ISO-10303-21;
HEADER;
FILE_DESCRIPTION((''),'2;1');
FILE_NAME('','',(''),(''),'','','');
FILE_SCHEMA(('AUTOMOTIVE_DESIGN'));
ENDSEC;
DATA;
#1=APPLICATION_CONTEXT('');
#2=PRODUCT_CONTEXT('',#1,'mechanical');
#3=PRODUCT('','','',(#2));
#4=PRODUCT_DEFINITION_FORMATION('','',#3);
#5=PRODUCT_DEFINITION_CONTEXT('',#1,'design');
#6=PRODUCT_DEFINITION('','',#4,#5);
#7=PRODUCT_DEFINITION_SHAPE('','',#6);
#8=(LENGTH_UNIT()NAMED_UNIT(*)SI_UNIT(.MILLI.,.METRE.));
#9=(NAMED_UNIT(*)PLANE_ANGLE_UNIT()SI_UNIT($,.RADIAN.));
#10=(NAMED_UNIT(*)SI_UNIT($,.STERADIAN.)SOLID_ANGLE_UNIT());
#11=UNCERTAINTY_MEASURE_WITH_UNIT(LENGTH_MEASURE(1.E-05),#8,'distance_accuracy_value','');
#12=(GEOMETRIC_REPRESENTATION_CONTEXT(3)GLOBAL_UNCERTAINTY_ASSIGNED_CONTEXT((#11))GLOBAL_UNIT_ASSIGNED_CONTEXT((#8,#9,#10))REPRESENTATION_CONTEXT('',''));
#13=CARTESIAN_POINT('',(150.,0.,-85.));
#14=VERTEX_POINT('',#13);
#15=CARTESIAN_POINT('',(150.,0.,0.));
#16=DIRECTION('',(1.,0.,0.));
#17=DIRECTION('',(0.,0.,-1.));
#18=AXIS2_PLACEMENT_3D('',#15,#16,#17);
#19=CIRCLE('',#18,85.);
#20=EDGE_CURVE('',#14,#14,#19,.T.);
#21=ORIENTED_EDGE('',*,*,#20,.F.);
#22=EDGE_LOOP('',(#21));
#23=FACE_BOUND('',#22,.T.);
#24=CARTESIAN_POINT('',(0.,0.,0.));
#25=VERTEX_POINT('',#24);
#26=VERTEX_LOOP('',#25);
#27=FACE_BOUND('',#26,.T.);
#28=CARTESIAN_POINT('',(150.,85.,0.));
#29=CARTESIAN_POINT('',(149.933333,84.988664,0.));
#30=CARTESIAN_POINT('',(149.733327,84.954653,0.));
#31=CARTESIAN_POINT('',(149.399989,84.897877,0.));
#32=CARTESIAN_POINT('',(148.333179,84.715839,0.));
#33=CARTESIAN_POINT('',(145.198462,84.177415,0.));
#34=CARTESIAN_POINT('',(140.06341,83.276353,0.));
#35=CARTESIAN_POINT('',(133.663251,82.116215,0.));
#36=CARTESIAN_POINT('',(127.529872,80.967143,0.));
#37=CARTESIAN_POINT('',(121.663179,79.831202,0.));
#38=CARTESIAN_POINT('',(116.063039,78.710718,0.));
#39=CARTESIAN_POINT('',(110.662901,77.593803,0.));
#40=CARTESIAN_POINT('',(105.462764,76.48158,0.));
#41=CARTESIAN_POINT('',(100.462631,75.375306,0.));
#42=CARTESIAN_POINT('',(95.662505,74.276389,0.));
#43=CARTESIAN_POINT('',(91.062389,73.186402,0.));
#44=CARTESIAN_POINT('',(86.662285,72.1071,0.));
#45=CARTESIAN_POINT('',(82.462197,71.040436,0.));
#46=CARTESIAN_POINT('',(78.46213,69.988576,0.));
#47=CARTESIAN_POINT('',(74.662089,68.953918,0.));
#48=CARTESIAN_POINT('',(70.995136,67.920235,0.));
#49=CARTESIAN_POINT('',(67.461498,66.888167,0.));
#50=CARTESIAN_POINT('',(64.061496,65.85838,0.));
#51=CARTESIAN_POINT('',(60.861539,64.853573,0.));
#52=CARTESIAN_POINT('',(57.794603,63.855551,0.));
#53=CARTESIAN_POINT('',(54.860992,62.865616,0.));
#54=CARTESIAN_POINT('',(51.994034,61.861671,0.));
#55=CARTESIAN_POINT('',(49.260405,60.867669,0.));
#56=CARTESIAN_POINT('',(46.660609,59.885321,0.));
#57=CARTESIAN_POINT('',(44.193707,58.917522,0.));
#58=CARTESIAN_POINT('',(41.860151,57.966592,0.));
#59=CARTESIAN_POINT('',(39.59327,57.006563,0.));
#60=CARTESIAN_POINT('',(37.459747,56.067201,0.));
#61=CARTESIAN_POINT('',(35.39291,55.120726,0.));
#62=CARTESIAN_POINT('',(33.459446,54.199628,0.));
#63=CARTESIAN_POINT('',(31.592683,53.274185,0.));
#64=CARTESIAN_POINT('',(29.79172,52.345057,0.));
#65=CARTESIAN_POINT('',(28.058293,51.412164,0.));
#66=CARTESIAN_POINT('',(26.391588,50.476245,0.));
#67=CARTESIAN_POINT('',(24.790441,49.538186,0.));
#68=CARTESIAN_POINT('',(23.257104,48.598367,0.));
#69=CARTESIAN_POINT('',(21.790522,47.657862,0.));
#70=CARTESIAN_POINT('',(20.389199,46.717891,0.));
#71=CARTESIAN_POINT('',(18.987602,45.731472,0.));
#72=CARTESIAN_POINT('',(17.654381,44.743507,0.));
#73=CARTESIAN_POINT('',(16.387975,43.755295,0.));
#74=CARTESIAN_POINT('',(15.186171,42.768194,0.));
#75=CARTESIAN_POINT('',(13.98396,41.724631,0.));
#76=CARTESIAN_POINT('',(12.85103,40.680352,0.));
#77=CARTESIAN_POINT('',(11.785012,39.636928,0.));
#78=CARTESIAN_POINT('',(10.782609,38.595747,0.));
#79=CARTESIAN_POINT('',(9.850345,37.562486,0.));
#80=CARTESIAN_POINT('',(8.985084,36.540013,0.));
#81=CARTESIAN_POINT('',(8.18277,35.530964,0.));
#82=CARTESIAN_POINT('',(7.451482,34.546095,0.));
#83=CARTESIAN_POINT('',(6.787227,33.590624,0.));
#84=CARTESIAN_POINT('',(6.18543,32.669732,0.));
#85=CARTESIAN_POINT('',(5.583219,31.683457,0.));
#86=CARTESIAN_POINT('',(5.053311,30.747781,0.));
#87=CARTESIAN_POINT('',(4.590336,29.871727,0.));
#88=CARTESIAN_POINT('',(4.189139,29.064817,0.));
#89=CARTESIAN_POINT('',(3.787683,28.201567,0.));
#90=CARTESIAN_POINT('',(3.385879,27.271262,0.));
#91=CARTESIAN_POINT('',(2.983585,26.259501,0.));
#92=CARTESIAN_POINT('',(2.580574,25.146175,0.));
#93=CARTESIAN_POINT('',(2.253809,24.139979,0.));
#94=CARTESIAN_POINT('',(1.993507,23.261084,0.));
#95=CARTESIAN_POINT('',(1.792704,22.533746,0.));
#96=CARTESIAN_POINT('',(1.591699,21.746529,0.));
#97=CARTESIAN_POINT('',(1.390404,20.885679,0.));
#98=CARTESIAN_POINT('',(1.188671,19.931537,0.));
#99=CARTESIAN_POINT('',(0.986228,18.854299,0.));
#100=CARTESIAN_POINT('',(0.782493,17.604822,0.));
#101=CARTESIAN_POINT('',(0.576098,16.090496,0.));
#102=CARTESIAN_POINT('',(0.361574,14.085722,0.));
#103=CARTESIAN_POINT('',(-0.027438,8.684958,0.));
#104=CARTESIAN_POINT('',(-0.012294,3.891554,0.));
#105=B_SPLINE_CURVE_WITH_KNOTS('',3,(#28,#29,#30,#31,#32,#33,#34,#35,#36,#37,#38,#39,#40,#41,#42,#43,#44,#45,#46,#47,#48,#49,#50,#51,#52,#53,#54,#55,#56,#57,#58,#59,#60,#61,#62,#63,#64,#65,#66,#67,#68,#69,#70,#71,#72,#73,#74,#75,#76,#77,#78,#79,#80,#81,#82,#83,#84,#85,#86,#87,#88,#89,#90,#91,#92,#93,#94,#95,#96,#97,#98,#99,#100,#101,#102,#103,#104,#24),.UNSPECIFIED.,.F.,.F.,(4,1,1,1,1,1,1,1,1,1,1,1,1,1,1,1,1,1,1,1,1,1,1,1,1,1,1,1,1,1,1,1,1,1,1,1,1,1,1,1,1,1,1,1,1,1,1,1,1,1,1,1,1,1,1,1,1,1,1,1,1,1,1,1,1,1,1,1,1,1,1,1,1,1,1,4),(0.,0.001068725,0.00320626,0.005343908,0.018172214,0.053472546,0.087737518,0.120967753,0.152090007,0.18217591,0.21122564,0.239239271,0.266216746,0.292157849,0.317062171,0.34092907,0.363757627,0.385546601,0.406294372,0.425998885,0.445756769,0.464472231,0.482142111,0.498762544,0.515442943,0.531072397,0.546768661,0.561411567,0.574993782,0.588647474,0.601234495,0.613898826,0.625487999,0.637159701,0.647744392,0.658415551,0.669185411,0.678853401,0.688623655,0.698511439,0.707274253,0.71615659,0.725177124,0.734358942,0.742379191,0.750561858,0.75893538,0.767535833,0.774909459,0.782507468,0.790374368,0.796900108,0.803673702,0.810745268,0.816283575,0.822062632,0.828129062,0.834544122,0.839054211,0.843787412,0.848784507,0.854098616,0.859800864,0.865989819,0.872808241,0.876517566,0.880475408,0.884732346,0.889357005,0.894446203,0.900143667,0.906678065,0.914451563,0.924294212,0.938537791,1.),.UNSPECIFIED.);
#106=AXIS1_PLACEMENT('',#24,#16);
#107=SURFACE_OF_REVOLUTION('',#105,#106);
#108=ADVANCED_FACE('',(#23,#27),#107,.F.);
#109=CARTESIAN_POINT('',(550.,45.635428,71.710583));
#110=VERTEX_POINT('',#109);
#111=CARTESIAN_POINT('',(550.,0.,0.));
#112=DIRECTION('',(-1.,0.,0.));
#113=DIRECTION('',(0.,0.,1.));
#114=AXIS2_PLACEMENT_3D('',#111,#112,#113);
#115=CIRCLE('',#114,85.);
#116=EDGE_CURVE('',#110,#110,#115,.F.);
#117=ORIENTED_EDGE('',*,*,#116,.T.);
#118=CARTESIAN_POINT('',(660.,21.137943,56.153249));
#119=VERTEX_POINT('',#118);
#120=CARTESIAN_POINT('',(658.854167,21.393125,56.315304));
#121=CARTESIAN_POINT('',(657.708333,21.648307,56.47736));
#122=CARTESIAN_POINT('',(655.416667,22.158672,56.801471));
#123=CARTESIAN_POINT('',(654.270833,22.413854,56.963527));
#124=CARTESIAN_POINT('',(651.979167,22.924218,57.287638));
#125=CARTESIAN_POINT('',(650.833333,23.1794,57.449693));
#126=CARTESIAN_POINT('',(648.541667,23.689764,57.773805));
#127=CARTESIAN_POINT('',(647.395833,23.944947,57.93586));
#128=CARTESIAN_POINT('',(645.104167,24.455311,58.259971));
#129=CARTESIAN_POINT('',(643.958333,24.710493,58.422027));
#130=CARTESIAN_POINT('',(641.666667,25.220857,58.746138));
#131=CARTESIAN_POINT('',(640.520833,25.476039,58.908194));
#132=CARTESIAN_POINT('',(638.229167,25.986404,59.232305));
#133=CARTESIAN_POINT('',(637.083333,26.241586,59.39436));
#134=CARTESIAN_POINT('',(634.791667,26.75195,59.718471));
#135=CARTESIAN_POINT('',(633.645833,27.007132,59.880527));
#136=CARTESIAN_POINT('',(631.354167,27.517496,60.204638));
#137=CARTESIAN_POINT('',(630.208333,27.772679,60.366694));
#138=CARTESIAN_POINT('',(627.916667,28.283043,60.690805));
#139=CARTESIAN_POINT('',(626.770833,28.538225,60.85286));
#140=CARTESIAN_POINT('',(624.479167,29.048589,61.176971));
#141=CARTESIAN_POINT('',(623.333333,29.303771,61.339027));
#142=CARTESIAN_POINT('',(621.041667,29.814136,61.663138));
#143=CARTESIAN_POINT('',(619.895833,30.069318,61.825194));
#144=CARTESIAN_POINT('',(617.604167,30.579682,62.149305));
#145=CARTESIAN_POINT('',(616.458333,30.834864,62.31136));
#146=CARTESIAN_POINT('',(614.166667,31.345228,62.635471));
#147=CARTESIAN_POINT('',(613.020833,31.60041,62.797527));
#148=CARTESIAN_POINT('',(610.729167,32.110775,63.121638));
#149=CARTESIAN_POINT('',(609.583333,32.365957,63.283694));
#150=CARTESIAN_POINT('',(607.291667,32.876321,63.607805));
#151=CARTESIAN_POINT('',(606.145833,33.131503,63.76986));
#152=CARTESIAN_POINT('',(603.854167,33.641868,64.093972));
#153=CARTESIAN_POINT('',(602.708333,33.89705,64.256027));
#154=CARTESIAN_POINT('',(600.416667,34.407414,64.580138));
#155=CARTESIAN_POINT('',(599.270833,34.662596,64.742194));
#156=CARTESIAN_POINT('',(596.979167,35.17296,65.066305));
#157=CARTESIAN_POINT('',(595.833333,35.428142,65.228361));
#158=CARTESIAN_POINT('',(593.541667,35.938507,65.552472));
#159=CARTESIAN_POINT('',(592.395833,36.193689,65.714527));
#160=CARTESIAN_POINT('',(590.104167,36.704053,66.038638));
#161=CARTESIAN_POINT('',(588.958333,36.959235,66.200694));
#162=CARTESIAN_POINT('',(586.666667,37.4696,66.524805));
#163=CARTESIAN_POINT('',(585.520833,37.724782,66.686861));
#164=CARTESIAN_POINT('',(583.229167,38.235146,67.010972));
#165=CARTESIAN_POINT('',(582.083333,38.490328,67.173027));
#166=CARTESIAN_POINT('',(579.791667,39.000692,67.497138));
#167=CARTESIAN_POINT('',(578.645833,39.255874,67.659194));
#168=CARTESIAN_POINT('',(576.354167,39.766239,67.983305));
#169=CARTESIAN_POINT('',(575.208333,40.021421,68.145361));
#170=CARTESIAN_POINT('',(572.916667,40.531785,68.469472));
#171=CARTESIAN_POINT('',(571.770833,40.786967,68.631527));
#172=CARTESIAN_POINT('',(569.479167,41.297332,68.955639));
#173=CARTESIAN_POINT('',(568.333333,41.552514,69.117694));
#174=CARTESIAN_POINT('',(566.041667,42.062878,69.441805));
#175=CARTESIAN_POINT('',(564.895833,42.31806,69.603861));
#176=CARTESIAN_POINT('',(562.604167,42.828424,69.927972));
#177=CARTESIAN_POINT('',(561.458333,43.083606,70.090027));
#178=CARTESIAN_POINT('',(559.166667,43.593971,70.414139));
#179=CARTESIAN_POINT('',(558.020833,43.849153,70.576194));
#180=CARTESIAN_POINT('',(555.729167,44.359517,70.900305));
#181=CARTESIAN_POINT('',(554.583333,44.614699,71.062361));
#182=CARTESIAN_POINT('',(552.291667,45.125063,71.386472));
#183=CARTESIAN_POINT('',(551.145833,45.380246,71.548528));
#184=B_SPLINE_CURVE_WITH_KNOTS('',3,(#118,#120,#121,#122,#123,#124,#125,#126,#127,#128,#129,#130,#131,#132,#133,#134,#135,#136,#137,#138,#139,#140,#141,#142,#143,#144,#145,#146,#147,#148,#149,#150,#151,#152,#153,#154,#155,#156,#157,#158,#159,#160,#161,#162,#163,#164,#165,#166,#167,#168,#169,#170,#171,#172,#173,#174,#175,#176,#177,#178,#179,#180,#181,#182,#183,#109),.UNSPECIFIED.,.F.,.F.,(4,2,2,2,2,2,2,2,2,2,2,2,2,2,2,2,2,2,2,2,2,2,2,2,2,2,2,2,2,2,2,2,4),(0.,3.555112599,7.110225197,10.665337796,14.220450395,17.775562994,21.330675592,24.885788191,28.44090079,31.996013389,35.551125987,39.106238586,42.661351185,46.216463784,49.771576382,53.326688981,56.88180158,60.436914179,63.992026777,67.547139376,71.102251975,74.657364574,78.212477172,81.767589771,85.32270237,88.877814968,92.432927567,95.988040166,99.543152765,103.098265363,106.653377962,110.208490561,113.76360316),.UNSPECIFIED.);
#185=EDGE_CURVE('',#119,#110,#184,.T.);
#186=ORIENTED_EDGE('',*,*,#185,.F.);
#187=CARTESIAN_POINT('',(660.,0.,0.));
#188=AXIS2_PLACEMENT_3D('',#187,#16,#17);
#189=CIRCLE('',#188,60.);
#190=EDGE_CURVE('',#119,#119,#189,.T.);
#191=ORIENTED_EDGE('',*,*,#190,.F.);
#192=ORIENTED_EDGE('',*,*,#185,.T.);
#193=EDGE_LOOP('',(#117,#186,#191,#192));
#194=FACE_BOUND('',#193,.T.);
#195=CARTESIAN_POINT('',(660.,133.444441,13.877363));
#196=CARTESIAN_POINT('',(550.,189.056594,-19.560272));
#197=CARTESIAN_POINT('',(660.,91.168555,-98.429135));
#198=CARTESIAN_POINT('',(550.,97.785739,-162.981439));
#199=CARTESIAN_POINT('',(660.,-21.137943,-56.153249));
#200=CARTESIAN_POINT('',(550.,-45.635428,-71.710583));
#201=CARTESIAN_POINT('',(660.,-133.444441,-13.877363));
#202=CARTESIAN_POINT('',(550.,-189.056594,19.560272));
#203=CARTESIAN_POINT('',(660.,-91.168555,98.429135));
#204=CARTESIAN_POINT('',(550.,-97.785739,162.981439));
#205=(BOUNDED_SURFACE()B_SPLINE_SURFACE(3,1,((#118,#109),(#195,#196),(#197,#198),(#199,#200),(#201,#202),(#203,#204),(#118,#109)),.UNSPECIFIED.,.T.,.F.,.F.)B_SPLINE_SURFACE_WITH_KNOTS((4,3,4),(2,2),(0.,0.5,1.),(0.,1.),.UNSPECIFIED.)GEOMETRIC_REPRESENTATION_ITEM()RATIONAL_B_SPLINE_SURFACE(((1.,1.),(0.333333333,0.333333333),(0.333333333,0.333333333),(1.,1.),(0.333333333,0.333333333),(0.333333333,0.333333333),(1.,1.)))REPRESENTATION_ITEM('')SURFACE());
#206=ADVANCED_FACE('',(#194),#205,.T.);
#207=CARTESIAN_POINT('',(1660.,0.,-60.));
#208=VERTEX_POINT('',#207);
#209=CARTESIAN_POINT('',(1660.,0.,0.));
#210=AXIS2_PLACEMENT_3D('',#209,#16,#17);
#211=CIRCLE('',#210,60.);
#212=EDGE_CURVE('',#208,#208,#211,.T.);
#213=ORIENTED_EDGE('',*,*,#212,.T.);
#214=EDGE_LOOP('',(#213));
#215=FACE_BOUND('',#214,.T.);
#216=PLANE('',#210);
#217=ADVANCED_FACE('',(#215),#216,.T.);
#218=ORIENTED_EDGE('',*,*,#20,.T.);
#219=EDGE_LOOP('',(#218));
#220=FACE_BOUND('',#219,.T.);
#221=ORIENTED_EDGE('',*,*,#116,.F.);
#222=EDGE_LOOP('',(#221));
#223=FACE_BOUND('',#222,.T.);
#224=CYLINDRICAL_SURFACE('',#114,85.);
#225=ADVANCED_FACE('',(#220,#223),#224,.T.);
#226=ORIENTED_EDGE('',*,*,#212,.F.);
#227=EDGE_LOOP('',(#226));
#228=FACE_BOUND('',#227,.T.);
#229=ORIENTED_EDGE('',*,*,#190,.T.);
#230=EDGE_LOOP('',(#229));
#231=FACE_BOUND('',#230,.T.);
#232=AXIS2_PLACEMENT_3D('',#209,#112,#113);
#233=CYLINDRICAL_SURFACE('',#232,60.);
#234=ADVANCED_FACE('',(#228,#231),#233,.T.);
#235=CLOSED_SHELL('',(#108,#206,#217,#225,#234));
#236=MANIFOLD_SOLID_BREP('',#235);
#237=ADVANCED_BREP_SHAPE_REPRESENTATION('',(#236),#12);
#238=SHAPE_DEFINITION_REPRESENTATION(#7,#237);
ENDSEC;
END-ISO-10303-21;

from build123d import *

# Parameters (mm, degrees)
SKETCH2_R           = 85
BOSS_EXTRUDE1_DEPTH = 400
SKETCH4_R           = 60
BOSS_EXTRUDE2_DEPTH = 1000


with BuildPart() as part:
    # Sketch1 → Revolve1 (revolve)
    with BuildSketch(Plane.XY):
        with BuildLine():
            Line((150, 85), (150, 0))
            Line((150, 0), (0, 0))
            add(Edge.make_bspline(
                [(0, 0), (-0.012294225, 3.891554312), (-0.027437579, 8.684958126), (0.361573767, 14.085722357), (0.576098453, 16.090496183), (0.782493435, 17.604822189), (0.986227589, 18.854298664), (1.188670863, 19.931536976), (1.390404268, 20.885679324), (1.591698837, 21.746529091), (1.792703864, 22.533746067), (1.993507167, 23.261083862), (2.253808552, 24.139979457), (2.580573656, 25.146175179), (2.983585386, 26.259501153), (3.385879093, 27.271261727), (3.787683439, 28.201566994), (4.189138614, 29.064817448), (4.590335615, 29.871726974), (5.05331092, 30.74778076), (5.583218589, 31.683457084), (6.185429632, 32.669732492), (6.787226927, 33.590624245), (7.451481511, 34.546094958), (8.182770444, 35.530963646), (8.985083876, 36.540013411), (9.850344603, 37.562485558), (10.782608842, 38.595746542), (11.785011743, 39.636928062), (12.851029789, 40.680352273), (13.983960321, 41.72463117), (15.186170623, 42.768194245), (16.387975322, 43.755294725), (17.654380903, 44.743506811), (18.987602276, 45.731471932), (20.389198856, 46.717890971), (21.790522044, 47.657861765), (23.257103599, 48.59836715), (24.790441056, 49.538186318), (26.391587757, 50.476245251), (28.05829275, 51.412163763), (29.791720393, 52.345056651), (31.59268286, 53.274185034), (33.459445798, 54.199628429), (35.392909821, 55.120726442), (37.459746918, 56.067201212), (39.59327023, 57.006562681), (41.860151348, 57.96659169), (44.193707143, 58.917521836), (46.660609333, 59.885320784), (49.260404933, 60.867669295), (51.99403381, 61.861671206), (54.860992187, 62.865616104), (57.794602823, 63.85555089), (60.861539281, 64.853573463), (64.06149587, 65.858380358), (67.461497598, 66.888166734), (70.995135905, 67.920234745), (74.662088876, 68.953918346), (78.462130407, 69.988575944), (82.462197069, 71.040436012), (86.662284614, 72.107100186), (91.062388571, 73.18640193), (95.662505252, 74.276388609), (100.462631288, 75.375305679), (105.462763855, 76.481579791), (110.662900527, 77.593803027), (116.063039296, 78.710717608), (121.663178505, 79.831201671), (127.529872228, 80.967142806), (133.663251007, 82.116215238), (140.063409966, 83.276352633), (145.198462089, 84.177415336), (148.333178957, 84.715838785), (149.39998937, 84.897876633), (149.733326587, 84.954653305), (149.933332963, 84.98866355), (150, 85)],
                knots=[0, 0, 0, 0, 0.061462209, 0.075705788, 0.085548437, 0.093321935, 0.099856333, 0.105553797, 0.110642995, 0.115267654, 0.119524592, 0.123482434, 0.127191759, 0.134010181, 0.140199136, 0.145901384, 0.151215493, 0.156212588, 0.160945789, 0.165455878, 0.171870938, 0.177937368, 0.183716425, 0.189254732, 0.196326298, 0.203099892, 0.209625632, 0.217492532, 0.225090541, 0.232464167, 0.24106462, 0.249438142, 0.257620809, 0.265641058, 0.274822876, 0.28384341, 0.292725747, 0.301488561, 0.311376345, 0.321146599, 0.330814589, 0.341584449, 0.352255608, 0.362840299, 0.374512001, 0.386101174, 0.398765505, 0.411352526, 0.425006218, 0.438588433, 0.453231339, 0.468927603, 0.484557057, 0.501237456, 0.517857889, 0.535527769, 0.554243231, 0.574001115, 0.593705628, 0.614453399, 0.636242373, 0.65907093, 0.682937829, 0.707842151, 0.733783254, 0.760760729, 0.78877436, 0.81782409, 0.847909993, 0.879032247, 0.912262482, 0.946527454, 0.981827786, 0.994656092, 0.99679374, 0.998931275, 1, 1, 1, 1], degree=3))
        make_face()
    revolve(axis=Axis((0, 0, 0), (-1, 0, 0)))

    # Sketch2 → Boss-Extrude1 (add)
    with BuildSketch(Plane(origin=(150, 0, 0), x_dir=(0, 0, -1), z_dir=(1, 0, 0))):
        Circle(SKETCH2_R)
    extrude(amount=BOSS_EXTRUDE1_DEPTH)

    # Loft1: read off the stored shape, not the designer's step
    # Loft1: loft between two sections, ruled curve by curve
    loft1_from = [
        Edge.make_bspline([(660, 21.137943081, 56.153248902), (660, 133.444440886, 13.877362739), (660, 91.168554723, -98.429135065), (660, -21.137943081, -56.153248902), (660, -133.444440886, -13.877362739), (660, -91.168554723, 98.429135065), (660, 21.137943081, 56.153248902)], [0, 0, 0, 0, 0.5, 0.5, 0.5, 1, 1, 1, 1], 3, [1, 0.333333333, 0.333333333, 1, 0.333333333, 0.333333333, 1]),
    ]
    loft1_to = [
        Edge.make_bspline([(550, 45.635427758, 71.710583133), (550, 189.056594025, -19.560272383), (550, 97.785738508, -162.98143865), (550, -45.635427758, -71.710583133), (550, -189.056594025, 19.560272383), (550, -97.785738508, 162.98143865), (550, 45.635427758, 71.710583133)], [0, 0, 0, 0, 0.5, 0.5, 0.5, 1, 1, 1, 1], 3, [1, 0.333333333, 0.333333333, 1, 0.333333333, 0.333333333, 1]),
    ]
    loft1 = Solid(Shell([*[Face.make_surface_from_curves(loft1_from[k], loft1_to[k]) for k in range(1)], Face(Wire(loft1_from)), Face(Wire(loft1_to))]))
    add(loft1)

    # Sketch4 → Boss-Extrude2 (add)
    with BuildSketch(Plane(origin=(660, 0, 0), x_dir=(0, 0, -1), z_dir=(1, 0, 0))):
        with Locations(Location((0, 0, 0), (0, 0, 159.372))):
            Circle(SKETCH4_R)
    extrude(amount=BOSS_EXTRUDE2_DEPTH)


solid = part.part
